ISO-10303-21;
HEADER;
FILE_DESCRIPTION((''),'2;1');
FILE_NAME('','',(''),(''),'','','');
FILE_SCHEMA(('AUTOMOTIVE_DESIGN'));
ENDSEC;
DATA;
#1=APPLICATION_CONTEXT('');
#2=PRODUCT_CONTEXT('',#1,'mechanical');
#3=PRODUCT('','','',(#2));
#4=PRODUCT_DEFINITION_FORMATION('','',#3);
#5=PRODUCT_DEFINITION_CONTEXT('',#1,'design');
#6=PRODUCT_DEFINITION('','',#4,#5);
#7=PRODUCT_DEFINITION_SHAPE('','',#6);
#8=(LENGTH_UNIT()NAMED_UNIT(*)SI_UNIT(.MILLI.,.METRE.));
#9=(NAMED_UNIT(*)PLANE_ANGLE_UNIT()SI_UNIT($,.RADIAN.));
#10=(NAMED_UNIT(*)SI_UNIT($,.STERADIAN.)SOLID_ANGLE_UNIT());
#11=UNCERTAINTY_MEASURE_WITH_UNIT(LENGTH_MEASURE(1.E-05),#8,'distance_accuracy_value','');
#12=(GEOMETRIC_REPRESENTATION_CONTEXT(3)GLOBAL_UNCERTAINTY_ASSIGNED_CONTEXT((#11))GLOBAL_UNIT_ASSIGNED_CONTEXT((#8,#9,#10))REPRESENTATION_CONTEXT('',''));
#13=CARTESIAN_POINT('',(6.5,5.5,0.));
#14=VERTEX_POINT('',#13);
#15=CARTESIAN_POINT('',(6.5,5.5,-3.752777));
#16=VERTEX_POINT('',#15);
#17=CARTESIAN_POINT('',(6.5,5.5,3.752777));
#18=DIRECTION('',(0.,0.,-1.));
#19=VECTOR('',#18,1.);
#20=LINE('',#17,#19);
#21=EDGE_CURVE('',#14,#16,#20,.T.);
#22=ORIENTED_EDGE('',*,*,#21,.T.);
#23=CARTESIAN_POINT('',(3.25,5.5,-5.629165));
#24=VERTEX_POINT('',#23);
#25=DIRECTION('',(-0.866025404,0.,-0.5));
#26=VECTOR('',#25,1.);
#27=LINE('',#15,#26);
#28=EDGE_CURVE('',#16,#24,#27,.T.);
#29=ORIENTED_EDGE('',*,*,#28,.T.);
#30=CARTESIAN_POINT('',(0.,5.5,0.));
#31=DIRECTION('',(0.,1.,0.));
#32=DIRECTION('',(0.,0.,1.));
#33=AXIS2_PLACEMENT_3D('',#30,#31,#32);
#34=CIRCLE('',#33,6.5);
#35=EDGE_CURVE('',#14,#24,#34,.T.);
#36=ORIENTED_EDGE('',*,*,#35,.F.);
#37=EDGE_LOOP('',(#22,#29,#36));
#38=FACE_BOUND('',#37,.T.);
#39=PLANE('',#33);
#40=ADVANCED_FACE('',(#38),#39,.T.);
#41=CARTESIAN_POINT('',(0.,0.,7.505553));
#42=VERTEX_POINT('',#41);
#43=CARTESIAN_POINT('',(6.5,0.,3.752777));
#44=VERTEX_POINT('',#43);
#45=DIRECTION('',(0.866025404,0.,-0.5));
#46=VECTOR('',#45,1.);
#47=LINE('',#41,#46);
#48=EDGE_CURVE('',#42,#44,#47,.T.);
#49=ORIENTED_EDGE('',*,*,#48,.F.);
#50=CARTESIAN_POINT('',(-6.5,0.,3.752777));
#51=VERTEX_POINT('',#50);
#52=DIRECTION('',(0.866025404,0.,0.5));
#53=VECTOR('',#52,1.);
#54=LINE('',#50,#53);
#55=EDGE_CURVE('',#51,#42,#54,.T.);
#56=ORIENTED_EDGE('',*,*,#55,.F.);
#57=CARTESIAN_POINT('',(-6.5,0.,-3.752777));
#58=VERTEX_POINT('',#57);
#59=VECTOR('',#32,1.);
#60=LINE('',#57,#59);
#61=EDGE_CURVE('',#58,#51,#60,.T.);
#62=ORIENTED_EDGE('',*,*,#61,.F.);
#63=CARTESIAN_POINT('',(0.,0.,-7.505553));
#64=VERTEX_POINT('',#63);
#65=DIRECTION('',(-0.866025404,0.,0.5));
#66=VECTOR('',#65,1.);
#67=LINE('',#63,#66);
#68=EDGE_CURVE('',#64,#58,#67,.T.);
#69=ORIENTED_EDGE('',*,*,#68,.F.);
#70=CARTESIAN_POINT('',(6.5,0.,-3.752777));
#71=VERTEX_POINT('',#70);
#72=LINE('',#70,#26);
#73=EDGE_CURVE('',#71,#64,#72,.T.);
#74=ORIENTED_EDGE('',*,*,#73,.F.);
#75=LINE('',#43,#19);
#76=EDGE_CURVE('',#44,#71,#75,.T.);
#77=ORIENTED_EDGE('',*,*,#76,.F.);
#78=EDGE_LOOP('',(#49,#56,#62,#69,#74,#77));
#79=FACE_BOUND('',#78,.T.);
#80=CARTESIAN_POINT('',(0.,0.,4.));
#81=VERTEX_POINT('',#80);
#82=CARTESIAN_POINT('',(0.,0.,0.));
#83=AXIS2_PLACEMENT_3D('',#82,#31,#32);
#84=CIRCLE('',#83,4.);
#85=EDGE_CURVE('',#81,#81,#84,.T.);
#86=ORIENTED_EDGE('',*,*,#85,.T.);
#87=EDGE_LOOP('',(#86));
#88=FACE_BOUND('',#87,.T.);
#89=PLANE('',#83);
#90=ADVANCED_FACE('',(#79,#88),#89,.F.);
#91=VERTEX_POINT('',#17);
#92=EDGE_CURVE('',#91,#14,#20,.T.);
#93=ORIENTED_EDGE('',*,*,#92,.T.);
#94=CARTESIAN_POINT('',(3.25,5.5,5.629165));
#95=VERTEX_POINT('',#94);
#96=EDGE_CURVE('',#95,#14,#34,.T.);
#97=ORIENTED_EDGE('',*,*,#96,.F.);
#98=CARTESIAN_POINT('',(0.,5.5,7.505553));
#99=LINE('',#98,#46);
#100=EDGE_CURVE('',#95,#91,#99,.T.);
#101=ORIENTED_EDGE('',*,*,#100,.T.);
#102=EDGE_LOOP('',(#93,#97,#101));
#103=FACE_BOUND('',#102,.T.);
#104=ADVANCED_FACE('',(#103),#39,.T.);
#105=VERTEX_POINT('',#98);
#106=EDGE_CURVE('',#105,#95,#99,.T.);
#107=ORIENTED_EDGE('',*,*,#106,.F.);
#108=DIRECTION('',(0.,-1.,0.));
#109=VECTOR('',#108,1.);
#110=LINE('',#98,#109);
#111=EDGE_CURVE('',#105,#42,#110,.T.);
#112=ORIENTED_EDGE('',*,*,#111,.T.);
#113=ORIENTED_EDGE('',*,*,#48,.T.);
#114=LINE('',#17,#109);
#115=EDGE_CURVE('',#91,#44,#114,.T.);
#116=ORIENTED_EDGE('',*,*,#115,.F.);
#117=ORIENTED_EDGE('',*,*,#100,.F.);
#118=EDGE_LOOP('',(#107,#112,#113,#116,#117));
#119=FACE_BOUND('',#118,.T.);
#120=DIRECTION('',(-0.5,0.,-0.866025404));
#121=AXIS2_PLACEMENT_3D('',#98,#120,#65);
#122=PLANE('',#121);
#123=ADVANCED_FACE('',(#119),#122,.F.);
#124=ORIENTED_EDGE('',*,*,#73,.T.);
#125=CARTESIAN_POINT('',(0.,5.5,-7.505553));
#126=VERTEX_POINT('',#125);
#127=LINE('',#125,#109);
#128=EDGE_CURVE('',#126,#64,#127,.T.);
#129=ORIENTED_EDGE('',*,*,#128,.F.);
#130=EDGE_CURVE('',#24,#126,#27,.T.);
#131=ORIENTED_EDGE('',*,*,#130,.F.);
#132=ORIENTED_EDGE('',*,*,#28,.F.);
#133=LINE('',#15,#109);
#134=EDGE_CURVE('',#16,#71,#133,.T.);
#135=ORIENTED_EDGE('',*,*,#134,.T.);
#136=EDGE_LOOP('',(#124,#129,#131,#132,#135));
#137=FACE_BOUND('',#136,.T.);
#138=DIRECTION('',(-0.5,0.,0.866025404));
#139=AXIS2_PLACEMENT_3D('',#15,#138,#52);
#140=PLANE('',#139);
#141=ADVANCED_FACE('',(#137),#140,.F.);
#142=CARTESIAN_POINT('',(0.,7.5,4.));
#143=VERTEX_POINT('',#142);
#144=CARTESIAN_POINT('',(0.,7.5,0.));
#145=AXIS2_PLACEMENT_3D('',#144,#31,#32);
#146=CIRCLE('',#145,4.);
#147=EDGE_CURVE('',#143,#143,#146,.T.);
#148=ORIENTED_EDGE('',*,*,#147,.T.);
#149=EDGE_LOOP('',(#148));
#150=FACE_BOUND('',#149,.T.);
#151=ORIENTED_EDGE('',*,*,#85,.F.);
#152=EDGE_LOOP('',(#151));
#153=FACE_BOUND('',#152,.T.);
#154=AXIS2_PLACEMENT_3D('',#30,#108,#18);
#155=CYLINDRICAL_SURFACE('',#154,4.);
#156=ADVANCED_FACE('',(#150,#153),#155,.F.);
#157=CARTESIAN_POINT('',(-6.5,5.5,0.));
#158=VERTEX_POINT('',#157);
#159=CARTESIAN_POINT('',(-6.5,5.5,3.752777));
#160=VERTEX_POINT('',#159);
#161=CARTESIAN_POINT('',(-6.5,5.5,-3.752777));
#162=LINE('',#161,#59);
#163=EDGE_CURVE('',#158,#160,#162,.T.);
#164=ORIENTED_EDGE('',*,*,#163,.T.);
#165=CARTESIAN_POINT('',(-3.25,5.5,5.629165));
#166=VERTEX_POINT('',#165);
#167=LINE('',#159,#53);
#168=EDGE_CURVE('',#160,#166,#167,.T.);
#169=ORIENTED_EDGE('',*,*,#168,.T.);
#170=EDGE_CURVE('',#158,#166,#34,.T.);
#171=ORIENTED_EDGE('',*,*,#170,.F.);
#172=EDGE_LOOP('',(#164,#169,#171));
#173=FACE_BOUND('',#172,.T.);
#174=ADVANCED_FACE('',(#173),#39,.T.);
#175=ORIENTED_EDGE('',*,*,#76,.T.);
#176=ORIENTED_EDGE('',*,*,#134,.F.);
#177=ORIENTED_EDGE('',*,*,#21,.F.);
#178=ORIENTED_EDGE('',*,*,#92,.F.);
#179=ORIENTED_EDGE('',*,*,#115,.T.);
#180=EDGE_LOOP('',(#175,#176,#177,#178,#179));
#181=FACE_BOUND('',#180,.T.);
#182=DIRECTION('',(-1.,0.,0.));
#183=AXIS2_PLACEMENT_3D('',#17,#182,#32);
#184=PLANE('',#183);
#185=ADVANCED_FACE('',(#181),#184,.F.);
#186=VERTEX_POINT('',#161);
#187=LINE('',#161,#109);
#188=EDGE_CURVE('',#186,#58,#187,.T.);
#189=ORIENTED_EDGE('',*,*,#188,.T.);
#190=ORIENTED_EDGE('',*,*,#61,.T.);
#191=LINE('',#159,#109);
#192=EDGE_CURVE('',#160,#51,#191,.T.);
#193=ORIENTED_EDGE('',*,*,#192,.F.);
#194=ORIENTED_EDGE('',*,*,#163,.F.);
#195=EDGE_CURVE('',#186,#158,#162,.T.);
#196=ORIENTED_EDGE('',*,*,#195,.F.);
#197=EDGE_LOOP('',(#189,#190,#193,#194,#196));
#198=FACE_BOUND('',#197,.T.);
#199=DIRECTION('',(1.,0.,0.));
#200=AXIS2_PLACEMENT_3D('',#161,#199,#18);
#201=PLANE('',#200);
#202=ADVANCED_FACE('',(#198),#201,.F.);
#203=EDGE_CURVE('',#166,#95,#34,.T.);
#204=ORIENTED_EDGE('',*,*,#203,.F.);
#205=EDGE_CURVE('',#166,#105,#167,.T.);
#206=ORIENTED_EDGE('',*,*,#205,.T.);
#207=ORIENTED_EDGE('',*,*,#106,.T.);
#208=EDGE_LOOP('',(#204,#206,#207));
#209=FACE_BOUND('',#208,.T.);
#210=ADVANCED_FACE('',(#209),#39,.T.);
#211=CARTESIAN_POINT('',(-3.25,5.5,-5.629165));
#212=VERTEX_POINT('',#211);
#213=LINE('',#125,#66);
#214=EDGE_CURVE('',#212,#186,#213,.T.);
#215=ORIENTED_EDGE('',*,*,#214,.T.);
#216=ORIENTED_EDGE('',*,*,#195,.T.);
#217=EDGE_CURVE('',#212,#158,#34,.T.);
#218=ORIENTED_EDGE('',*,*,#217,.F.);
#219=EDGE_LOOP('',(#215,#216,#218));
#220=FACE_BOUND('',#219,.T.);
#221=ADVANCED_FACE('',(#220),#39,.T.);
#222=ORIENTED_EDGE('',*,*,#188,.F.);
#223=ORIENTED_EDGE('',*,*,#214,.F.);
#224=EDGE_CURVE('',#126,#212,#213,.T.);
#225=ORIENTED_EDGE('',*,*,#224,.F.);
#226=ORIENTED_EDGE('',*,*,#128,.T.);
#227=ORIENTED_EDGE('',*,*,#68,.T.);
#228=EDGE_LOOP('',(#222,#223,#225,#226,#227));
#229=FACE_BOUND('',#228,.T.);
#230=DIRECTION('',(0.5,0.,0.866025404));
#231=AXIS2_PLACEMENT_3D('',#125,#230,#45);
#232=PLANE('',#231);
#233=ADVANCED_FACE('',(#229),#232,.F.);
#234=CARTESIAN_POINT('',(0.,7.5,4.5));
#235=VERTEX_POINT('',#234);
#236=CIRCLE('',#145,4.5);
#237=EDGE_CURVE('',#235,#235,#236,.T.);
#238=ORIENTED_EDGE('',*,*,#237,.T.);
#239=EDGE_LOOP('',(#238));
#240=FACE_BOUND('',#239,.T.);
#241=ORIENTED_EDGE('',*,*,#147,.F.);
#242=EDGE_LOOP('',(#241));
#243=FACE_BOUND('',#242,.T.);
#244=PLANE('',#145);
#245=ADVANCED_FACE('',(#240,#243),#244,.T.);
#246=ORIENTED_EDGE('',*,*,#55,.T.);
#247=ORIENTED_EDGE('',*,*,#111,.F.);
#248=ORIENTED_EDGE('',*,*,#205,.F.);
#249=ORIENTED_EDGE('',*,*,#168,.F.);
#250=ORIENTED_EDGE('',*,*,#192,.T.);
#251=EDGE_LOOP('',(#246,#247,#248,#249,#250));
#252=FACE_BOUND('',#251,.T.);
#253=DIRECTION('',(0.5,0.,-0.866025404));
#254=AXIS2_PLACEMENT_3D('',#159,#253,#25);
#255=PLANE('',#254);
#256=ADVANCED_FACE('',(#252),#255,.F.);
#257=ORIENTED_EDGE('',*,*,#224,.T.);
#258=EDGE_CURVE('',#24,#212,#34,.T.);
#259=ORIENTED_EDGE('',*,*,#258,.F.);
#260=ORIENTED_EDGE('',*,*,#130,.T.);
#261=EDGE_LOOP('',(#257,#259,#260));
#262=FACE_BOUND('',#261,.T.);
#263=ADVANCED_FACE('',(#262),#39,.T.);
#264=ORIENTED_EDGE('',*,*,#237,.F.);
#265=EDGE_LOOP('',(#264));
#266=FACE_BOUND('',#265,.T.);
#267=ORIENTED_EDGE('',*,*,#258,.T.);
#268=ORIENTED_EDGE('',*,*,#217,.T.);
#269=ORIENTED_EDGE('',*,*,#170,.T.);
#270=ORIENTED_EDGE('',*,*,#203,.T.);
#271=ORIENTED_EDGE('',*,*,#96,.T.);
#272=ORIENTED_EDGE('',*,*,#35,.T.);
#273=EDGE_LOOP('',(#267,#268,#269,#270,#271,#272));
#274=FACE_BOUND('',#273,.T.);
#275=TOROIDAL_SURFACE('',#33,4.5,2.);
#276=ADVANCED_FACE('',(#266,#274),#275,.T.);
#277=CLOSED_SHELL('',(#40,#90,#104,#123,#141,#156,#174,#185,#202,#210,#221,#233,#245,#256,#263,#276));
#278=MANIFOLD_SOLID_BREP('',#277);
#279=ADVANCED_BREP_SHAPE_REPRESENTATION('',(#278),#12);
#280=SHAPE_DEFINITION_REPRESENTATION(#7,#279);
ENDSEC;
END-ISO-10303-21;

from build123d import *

# Parameters (mm, degrees)
SKETCH1_R           = 4
BOSS_EXTRUDE1_DEPTH = 5.5
SKETCH2_R           = 6.5
SKETCH2_R_2         = 4
BOSS_EXTRUDE2_DEPTH = 2
FILLET1_R           = 2


with BuildPart() as part:
    # Sketch1 → Boss-Extrude1 (new body)
    with BuildSketch(Plane(origin=(0, 0, 0), x_dir=(1, 0, 0), z_dir=(0, 1, 0))):
        Polygon((6.5, -3.75277675), (6.5, 3.75277675), (0, 7.505553499), (-6.5, 3.75277675), (-6.5, -3.75277675), (0, -7.505553499), align=None)
        with Locations(Location((0, 0, 0), (0, 0, 270))):
            Circle(SKETCH1_R, mode=Mode.SUBTRACT)
    extrude(amount=BOSS_EXTRUDE1_DEPTH)

    # Sketch2 → Boss-Extrude2 (add)
    with BuildSketch(Plane(origin=(0, 5.5, 0), x_dir=(1, 0, 0), z_dir=(0, 1, 0))):
        with Locations(Location((0, 0, 0), (0, 0, 60))):
            Circle(SKETCH2_R)
        with Locations(Location((0, 0, 0), (0, 0, 270))):
            Circle(SKETCH2_R_2, mode=Mode.SUBTRACT)
    extrude(amount=BOSS_EXTRUDE2_DEPTH)

    # Fillet1
    fillet1_edges = [part.edges().sort_by_distance(p)[0] for p in [
        (-3.25, 7.5, 5.629165125),
    ]]
    fillet(fillet1_edges, radius=FILLET1_R - 0.0001)  # a hair under: the kernel refuses the full size


solid = part.part
